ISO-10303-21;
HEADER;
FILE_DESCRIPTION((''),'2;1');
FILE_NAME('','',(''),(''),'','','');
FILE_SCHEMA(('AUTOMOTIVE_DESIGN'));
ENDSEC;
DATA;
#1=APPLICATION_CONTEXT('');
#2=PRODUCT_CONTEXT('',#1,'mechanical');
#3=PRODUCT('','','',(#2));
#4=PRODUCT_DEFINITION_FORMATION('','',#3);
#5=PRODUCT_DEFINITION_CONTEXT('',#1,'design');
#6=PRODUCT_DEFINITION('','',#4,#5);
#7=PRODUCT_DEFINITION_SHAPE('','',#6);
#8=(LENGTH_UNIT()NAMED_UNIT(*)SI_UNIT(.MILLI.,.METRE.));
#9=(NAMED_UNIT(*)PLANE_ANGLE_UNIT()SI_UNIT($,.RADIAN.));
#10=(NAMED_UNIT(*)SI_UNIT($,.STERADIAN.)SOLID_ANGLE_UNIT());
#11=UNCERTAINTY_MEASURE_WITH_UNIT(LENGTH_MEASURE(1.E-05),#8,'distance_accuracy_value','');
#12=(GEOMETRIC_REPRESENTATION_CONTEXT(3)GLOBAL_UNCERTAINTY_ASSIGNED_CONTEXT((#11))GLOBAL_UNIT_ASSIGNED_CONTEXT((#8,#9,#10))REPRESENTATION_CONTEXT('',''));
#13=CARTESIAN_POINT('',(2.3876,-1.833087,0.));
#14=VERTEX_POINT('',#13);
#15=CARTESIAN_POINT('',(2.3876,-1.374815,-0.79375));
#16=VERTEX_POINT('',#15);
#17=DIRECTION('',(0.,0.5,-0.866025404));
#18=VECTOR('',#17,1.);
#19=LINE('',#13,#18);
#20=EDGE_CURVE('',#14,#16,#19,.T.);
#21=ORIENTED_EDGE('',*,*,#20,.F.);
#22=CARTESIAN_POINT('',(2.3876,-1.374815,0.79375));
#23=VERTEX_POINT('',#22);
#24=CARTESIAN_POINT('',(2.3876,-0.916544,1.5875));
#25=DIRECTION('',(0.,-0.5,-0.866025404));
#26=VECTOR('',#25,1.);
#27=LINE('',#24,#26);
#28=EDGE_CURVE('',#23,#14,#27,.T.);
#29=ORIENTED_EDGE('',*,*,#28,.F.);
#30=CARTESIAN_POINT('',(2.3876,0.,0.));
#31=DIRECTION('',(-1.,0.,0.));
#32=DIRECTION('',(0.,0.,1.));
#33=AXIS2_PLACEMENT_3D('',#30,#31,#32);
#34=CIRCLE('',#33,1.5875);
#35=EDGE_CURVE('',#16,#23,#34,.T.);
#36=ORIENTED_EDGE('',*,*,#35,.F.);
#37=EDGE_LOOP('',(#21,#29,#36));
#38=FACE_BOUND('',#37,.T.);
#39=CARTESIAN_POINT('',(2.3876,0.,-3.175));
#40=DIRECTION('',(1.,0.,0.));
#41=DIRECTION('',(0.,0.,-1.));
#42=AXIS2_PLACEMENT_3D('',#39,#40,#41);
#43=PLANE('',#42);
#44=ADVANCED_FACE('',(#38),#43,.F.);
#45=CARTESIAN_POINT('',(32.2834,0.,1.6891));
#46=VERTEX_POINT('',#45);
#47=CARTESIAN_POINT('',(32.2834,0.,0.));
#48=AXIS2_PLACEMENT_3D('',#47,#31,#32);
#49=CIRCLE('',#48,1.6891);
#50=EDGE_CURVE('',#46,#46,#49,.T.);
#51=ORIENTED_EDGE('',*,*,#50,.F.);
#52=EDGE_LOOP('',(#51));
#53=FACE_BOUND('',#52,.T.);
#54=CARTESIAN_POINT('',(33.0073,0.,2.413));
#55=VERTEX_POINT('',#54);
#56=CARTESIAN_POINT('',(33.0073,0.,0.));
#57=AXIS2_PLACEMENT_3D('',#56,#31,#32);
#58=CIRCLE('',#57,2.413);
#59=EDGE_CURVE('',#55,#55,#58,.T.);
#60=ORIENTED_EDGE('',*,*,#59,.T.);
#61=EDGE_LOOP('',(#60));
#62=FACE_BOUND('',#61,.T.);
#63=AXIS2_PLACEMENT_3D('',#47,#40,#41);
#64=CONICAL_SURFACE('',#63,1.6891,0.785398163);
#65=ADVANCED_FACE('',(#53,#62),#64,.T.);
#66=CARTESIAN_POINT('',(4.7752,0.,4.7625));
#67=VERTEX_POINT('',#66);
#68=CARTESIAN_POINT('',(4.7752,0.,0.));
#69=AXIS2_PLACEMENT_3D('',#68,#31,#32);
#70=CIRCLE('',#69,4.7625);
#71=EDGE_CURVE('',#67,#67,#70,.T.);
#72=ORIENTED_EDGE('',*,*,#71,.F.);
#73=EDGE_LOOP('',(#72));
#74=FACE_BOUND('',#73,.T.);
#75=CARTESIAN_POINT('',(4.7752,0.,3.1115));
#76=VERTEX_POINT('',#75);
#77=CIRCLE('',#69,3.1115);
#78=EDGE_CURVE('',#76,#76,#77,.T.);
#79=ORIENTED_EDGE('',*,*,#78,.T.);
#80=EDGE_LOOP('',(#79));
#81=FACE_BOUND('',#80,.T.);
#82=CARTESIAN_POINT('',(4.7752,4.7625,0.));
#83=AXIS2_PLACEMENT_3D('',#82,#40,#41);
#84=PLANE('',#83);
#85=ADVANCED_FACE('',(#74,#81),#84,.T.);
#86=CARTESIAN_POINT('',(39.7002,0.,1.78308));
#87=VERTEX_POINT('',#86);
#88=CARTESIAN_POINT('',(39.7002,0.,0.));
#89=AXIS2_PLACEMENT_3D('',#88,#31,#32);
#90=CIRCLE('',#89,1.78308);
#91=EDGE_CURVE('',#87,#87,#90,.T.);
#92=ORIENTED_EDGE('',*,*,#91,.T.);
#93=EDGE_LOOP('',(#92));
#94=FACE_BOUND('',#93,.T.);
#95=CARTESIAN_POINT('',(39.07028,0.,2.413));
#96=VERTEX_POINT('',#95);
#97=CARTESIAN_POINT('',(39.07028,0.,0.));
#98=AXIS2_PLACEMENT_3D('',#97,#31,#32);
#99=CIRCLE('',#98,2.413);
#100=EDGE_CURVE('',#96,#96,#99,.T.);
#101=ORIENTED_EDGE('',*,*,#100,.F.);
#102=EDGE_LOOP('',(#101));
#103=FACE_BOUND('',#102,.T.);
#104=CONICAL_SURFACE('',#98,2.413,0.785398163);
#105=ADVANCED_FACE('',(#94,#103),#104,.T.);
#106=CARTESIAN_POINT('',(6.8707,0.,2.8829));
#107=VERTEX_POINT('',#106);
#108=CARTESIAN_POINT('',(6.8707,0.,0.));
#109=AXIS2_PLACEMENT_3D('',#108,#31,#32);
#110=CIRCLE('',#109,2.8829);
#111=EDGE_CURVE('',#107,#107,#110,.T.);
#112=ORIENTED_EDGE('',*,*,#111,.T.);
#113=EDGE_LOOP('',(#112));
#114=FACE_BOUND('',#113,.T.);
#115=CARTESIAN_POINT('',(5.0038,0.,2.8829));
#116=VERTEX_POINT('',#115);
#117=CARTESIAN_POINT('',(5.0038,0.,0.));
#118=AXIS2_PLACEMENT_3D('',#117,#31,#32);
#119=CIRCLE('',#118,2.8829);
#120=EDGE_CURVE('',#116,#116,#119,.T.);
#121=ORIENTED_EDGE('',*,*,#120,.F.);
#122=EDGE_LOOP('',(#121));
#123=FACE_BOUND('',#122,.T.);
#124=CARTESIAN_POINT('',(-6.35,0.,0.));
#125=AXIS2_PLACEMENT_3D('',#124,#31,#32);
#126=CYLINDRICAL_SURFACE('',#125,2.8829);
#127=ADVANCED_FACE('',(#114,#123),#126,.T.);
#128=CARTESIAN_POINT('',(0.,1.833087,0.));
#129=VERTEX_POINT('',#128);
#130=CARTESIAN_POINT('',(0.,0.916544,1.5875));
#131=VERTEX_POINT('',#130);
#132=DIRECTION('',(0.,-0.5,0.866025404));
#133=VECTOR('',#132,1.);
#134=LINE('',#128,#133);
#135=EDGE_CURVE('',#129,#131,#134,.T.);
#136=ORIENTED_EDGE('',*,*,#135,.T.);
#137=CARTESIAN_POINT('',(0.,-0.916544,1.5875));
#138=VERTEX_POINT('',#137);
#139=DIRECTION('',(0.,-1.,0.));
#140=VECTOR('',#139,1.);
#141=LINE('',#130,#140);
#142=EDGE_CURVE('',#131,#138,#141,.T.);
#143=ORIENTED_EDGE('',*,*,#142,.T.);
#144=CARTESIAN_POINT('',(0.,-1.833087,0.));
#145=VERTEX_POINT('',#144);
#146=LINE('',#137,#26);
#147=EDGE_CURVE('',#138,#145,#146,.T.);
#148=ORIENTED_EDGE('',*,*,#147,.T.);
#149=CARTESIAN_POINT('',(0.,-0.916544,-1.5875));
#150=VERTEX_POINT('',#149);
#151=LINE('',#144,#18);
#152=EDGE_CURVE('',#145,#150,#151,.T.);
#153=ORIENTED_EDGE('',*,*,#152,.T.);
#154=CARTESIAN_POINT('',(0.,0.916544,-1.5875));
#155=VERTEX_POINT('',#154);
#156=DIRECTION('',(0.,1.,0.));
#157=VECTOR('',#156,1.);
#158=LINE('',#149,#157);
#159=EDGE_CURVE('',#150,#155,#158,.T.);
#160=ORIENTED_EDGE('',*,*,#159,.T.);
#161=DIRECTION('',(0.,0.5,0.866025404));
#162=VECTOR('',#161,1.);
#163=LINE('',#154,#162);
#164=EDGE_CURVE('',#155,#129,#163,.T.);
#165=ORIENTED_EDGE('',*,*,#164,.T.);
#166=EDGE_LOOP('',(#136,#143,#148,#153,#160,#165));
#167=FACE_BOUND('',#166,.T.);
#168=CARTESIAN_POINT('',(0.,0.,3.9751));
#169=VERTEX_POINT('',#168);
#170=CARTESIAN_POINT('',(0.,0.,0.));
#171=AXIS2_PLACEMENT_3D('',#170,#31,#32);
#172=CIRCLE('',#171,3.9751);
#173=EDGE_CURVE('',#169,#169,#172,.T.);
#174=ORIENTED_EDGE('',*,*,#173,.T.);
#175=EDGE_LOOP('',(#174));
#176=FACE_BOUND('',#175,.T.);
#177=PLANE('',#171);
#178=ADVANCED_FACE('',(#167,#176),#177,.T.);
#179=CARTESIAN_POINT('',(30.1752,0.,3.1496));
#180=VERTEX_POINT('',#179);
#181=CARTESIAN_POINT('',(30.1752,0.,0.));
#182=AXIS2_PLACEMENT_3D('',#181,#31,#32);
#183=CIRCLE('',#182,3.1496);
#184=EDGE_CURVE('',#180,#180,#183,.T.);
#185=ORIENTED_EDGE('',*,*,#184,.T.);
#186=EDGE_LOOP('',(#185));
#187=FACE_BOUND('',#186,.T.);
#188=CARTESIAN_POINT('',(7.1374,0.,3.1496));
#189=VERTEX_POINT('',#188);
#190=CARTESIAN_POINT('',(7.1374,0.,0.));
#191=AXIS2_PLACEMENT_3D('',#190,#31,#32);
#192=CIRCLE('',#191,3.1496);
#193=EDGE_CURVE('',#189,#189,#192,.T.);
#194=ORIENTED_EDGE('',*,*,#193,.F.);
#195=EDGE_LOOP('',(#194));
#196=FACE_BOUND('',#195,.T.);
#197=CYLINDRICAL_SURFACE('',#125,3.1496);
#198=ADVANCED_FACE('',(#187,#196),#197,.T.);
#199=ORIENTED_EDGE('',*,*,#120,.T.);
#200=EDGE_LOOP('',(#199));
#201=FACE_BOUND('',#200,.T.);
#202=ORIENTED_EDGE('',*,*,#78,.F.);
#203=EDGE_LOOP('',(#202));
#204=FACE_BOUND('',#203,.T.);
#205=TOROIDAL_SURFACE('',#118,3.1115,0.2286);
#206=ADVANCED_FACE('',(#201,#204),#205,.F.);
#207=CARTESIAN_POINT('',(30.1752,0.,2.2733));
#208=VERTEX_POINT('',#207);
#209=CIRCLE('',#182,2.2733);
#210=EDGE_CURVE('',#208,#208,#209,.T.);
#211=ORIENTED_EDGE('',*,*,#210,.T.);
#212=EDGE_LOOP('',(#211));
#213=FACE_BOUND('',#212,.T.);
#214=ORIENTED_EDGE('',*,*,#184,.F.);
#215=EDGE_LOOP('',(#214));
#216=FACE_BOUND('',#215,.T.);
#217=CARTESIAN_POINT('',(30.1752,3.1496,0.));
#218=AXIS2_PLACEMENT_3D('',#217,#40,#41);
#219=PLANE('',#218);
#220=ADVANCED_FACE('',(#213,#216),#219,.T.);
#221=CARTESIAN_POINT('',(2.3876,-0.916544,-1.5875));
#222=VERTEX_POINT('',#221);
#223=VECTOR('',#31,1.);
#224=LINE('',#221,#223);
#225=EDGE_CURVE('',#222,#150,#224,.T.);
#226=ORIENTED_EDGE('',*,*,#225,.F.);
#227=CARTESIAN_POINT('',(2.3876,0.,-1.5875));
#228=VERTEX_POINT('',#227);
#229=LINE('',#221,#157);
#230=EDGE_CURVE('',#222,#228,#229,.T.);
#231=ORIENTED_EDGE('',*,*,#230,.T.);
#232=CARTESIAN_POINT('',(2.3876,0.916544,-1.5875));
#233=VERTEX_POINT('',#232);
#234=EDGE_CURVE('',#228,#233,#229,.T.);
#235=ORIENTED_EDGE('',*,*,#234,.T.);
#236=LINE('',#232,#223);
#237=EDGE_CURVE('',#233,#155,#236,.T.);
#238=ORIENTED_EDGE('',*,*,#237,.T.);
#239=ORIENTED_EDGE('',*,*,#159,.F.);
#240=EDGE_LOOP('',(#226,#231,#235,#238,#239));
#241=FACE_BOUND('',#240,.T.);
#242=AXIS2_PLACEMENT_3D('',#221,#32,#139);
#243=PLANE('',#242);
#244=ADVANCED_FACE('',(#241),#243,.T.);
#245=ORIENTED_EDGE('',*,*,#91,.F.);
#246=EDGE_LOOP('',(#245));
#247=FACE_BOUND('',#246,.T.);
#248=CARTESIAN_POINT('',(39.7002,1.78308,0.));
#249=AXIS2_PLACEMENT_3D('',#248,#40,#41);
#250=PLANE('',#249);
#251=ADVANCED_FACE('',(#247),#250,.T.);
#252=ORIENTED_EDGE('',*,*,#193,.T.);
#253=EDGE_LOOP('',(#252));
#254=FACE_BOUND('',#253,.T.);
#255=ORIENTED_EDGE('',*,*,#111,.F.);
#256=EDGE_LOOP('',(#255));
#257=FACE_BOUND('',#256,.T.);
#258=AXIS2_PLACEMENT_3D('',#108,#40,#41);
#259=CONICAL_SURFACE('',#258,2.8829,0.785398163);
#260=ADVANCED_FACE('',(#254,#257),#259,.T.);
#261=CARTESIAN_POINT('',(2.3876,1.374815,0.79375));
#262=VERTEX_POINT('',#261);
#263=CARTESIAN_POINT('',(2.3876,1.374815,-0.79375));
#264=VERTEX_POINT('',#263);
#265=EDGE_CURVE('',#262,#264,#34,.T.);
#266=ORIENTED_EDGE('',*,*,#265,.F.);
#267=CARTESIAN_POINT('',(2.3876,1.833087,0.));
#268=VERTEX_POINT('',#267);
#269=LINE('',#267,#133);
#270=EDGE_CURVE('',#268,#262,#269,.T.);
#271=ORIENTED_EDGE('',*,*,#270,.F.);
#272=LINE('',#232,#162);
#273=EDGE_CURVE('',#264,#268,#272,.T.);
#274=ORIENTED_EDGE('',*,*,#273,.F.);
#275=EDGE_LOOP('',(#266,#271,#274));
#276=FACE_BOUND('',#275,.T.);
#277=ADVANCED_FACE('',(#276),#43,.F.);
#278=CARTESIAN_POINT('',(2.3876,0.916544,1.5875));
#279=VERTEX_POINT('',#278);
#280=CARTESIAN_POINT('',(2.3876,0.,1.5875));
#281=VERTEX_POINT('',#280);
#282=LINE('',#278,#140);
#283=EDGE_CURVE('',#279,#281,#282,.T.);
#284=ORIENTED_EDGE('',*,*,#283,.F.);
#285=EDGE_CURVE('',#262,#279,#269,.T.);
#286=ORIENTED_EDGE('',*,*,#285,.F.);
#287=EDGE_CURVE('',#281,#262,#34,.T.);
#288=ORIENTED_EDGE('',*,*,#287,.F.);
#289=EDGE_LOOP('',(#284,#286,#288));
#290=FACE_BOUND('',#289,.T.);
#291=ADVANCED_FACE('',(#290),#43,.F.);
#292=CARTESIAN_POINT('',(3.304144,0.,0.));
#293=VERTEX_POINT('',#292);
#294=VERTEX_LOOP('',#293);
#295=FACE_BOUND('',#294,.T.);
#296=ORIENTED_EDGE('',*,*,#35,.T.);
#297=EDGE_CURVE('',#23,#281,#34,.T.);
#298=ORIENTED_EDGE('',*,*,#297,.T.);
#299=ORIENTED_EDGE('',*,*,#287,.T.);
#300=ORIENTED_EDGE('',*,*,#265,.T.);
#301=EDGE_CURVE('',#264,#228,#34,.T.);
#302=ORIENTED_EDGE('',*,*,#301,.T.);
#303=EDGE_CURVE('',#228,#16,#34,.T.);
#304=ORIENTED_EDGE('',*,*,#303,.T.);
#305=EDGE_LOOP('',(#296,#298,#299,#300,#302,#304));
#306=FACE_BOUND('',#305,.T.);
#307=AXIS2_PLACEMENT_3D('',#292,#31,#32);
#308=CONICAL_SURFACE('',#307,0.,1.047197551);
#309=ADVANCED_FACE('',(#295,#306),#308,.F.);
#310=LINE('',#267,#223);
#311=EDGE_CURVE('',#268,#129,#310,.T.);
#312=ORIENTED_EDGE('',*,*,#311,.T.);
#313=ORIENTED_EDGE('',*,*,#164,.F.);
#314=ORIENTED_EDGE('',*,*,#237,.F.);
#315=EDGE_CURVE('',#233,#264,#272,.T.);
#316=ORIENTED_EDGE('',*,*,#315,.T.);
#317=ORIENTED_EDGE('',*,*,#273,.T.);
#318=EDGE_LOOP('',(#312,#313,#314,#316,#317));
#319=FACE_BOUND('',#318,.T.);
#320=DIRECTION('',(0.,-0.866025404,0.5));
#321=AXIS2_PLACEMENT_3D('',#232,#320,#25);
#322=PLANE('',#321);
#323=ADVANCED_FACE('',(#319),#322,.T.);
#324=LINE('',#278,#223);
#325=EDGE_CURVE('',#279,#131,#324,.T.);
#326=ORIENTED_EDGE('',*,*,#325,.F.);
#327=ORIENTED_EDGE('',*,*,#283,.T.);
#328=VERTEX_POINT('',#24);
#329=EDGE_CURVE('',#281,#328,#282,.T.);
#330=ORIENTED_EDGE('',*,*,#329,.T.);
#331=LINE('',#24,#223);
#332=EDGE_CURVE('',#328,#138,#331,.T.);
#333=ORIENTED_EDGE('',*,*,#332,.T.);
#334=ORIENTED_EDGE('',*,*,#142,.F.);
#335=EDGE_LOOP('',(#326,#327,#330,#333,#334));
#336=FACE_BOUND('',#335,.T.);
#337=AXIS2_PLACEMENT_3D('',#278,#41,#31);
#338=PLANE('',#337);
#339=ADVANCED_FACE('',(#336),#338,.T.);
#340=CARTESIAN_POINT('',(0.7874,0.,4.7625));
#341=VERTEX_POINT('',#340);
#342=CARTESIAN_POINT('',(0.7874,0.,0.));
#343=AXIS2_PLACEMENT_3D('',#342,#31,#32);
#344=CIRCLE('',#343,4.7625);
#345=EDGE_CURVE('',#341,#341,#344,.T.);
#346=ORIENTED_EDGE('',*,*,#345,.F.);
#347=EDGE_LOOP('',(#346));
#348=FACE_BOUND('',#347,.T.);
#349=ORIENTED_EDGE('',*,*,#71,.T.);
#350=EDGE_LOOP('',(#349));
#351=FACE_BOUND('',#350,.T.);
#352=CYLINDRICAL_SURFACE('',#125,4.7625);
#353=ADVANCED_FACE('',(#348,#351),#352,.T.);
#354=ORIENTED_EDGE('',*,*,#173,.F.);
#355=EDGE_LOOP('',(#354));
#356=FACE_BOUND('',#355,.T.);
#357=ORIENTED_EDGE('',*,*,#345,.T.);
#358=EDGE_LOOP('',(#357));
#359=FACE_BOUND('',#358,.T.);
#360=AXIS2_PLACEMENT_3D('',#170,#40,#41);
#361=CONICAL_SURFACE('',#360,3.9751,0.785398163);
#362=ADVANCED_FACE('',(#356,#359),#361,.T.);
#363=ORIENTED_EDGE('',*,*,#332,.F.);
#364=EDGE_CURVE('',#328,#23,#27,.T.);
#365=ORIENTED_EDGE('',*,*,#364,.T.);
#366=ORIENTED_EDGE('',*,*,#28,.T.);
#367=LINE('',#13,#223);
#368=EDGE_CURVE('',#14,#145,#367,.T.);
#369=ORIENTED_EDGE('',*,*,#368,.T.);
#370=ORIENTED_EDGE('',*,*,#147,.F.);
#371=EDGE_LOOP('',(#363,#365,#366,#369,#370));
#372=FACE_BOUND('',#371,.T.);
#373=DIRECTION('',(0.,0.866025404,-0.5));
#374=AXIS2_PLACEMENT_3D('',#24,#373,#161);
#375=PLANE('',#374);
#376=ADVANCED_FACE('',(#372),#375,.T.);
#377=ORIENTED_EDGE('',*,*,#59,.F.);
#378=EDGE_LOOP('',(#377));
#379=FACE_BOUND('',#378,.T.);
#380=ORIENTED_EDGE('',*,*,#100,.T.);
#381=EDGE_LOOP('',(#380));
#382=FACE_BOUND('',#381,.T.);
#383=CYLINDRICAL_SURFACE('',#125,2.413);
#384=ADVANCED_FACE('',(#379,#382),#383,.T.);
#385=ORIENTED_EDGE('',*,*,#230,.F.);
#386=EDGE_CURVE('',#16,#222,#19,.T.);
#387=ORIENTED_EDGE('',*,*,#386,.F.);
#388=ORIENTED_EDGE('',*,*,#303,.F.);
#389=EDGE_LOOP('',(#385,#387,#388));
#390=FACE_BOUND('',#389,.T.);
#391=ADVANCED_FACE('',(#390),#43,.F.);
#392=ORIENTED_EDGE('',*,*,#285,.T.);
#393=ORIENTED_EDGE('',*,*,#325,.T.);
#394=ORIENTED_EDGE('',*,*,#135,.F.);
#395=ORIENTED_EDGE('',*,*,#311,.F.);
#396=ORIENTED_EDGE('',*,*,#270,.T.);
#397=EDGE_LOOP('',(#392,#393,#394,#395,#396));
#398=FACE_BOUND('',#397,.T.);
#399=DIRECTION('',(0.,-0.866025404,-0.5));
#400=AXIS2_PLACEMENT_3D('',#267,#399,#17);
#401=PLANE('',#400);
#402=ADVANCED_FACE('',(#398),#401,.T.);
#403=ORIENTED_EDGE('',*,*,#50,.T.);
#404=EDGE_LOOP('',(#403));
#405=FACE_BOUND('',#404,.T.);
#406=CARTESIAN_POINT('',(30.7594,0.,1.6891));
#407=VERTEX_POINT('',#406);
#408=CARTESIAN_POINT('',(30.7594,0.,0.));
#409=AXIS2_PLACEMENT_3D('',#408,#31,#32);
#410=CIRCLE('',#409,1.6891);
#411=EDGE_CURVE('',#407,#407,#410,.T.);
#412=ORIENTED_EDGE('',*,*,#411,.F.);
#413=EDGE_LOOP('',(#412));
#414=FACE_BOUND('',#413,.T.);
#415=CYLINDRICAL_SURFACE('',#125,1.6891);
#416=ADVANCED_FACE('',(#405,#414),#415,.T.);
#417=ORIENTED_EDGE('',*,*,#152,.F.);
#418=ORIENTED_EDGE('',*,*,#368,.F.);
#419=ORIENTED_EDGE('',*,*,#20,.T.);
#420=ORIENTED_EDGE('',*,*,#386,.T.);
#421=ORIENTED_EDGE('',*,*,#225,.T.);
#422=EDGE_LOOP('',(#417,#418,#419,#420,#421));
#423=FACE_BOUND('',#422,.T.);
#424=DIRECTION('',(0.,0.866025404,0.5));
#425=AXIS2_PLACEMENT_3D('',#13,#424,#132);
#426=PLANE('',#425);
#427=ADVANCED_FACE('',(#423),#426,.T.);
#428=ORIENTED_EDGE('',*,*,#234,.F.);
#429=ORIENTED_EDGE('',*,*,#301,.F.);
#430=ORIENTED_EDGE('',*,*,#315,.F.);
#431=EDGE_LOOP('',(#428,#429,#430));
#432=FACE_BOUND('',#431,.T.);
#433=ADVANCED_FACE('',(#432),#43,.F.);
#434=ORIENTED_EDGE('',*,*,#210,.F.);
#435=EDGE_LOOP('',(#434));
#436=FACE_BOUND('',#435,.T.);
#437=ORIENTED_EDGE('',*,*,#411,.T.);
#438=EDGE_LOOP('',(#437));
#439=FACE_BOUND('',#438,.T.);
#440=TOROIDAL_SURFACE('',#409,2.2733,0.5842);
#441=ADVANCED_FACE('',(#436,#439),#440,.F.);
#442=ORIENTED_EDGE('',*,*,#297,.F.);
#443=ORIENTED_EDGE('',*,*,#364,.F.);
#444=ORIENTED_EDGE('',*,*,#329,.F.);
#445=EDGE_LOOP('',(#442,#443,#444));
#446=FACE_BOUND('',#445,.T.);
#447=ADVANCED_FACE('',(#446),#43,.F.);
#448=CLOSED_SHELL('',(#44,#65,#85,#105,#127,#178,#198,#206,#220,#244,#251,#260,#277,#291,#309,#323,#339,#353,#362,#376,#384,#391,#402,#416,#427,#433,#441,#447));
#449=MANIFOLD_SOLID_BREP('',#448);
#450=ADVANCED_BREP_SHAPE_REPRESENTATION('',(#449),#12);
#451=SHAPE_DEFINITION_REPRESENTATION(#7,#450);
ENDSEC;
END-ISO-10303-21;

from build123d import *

# Parameters (mm, degrees)
HEX_2_DEPTH = 2.3876


# Read off the part's stored shape, not the designer's step: ThreadSchematic
with BuildPart() as part:
    # ThreadSchematic outline → ThreadSchematic (revolve)
    with BuildSketch(Plane.YX):
        with BuildLine():
            Line((0, 39.7002), (0, 0))
            Line((0, 0), (3.9751, 0))
            Line((3.9751, 0), (4.7625, 0.7874))
            Line((4.7625, 0.7874), (4.7625, 4.7752))
            Line((4.7625, 4.7752), (3.1115, 4.7752))
            ThreePointArc((3.1115, 4.7752), (2.94985539, 4.84215539), (2.8829, 5.0038))
            Line((2.8829, 5.0038), (2.8829, 6.8707))
            Line((2.8829, 6.8707), (3.1496, 7.1374))
            Line((3.1496, 7.1374), (3.1496, 30.1752))
            Line((3.1496, 30.1752), (2.2733, 30.1752))
            ThreePointArc((2.2733, 30.1752), (1.860208218, 30.346308218), (1.6891, 30.7594))
            Line((1.6891, 30.7594), (1.6891, 32.2834))
            Line((1.6891, 32.2834), (2.413, 33.0073))
            Line((2.413, 33.0073), (2.413, 39.07028))
            Line((2.413, 39.07028), (1.78308, 39.7002))
            Line((1.78308, 39.7002), (0, 39.7002))
        make_face()
    revolve(axis=Axis((0, 0, 0), (1, 0, 0)))

    # Sketch2 → PreBroach (revolve, cut)
    with BuildSketch(Plane.XY, mode=Mode.PRIVATE) as prebroach_sk:
        Polygon((0, 1.5875), (2.3876, 1.5875), (3.304143552, 0), (0, 0), align=None)
    revolve(prebroach_sk.sketch.rotate(Axis((0, 0, 0), (1, 0, 0)), 90), axis=Axis((0, 0, 0), (1, 0, 0)), mode=Mode.SUBTRACT)

    # Sketch3 → Hex 2 (cut)
    with BuildSketch(Plane.ZY):
        Polygon((-1.5875, -0.916543552), (-1.5875, 0.916543552), (0, 1.833087105), (1.5875, 0.916543552), (1.5875, -0.916543552), (0, -1.833087105), align=None)
    extrude(amount=-HEX_2_DEPTH, mode=Mode.SUBTRACT)


solid = part.part
